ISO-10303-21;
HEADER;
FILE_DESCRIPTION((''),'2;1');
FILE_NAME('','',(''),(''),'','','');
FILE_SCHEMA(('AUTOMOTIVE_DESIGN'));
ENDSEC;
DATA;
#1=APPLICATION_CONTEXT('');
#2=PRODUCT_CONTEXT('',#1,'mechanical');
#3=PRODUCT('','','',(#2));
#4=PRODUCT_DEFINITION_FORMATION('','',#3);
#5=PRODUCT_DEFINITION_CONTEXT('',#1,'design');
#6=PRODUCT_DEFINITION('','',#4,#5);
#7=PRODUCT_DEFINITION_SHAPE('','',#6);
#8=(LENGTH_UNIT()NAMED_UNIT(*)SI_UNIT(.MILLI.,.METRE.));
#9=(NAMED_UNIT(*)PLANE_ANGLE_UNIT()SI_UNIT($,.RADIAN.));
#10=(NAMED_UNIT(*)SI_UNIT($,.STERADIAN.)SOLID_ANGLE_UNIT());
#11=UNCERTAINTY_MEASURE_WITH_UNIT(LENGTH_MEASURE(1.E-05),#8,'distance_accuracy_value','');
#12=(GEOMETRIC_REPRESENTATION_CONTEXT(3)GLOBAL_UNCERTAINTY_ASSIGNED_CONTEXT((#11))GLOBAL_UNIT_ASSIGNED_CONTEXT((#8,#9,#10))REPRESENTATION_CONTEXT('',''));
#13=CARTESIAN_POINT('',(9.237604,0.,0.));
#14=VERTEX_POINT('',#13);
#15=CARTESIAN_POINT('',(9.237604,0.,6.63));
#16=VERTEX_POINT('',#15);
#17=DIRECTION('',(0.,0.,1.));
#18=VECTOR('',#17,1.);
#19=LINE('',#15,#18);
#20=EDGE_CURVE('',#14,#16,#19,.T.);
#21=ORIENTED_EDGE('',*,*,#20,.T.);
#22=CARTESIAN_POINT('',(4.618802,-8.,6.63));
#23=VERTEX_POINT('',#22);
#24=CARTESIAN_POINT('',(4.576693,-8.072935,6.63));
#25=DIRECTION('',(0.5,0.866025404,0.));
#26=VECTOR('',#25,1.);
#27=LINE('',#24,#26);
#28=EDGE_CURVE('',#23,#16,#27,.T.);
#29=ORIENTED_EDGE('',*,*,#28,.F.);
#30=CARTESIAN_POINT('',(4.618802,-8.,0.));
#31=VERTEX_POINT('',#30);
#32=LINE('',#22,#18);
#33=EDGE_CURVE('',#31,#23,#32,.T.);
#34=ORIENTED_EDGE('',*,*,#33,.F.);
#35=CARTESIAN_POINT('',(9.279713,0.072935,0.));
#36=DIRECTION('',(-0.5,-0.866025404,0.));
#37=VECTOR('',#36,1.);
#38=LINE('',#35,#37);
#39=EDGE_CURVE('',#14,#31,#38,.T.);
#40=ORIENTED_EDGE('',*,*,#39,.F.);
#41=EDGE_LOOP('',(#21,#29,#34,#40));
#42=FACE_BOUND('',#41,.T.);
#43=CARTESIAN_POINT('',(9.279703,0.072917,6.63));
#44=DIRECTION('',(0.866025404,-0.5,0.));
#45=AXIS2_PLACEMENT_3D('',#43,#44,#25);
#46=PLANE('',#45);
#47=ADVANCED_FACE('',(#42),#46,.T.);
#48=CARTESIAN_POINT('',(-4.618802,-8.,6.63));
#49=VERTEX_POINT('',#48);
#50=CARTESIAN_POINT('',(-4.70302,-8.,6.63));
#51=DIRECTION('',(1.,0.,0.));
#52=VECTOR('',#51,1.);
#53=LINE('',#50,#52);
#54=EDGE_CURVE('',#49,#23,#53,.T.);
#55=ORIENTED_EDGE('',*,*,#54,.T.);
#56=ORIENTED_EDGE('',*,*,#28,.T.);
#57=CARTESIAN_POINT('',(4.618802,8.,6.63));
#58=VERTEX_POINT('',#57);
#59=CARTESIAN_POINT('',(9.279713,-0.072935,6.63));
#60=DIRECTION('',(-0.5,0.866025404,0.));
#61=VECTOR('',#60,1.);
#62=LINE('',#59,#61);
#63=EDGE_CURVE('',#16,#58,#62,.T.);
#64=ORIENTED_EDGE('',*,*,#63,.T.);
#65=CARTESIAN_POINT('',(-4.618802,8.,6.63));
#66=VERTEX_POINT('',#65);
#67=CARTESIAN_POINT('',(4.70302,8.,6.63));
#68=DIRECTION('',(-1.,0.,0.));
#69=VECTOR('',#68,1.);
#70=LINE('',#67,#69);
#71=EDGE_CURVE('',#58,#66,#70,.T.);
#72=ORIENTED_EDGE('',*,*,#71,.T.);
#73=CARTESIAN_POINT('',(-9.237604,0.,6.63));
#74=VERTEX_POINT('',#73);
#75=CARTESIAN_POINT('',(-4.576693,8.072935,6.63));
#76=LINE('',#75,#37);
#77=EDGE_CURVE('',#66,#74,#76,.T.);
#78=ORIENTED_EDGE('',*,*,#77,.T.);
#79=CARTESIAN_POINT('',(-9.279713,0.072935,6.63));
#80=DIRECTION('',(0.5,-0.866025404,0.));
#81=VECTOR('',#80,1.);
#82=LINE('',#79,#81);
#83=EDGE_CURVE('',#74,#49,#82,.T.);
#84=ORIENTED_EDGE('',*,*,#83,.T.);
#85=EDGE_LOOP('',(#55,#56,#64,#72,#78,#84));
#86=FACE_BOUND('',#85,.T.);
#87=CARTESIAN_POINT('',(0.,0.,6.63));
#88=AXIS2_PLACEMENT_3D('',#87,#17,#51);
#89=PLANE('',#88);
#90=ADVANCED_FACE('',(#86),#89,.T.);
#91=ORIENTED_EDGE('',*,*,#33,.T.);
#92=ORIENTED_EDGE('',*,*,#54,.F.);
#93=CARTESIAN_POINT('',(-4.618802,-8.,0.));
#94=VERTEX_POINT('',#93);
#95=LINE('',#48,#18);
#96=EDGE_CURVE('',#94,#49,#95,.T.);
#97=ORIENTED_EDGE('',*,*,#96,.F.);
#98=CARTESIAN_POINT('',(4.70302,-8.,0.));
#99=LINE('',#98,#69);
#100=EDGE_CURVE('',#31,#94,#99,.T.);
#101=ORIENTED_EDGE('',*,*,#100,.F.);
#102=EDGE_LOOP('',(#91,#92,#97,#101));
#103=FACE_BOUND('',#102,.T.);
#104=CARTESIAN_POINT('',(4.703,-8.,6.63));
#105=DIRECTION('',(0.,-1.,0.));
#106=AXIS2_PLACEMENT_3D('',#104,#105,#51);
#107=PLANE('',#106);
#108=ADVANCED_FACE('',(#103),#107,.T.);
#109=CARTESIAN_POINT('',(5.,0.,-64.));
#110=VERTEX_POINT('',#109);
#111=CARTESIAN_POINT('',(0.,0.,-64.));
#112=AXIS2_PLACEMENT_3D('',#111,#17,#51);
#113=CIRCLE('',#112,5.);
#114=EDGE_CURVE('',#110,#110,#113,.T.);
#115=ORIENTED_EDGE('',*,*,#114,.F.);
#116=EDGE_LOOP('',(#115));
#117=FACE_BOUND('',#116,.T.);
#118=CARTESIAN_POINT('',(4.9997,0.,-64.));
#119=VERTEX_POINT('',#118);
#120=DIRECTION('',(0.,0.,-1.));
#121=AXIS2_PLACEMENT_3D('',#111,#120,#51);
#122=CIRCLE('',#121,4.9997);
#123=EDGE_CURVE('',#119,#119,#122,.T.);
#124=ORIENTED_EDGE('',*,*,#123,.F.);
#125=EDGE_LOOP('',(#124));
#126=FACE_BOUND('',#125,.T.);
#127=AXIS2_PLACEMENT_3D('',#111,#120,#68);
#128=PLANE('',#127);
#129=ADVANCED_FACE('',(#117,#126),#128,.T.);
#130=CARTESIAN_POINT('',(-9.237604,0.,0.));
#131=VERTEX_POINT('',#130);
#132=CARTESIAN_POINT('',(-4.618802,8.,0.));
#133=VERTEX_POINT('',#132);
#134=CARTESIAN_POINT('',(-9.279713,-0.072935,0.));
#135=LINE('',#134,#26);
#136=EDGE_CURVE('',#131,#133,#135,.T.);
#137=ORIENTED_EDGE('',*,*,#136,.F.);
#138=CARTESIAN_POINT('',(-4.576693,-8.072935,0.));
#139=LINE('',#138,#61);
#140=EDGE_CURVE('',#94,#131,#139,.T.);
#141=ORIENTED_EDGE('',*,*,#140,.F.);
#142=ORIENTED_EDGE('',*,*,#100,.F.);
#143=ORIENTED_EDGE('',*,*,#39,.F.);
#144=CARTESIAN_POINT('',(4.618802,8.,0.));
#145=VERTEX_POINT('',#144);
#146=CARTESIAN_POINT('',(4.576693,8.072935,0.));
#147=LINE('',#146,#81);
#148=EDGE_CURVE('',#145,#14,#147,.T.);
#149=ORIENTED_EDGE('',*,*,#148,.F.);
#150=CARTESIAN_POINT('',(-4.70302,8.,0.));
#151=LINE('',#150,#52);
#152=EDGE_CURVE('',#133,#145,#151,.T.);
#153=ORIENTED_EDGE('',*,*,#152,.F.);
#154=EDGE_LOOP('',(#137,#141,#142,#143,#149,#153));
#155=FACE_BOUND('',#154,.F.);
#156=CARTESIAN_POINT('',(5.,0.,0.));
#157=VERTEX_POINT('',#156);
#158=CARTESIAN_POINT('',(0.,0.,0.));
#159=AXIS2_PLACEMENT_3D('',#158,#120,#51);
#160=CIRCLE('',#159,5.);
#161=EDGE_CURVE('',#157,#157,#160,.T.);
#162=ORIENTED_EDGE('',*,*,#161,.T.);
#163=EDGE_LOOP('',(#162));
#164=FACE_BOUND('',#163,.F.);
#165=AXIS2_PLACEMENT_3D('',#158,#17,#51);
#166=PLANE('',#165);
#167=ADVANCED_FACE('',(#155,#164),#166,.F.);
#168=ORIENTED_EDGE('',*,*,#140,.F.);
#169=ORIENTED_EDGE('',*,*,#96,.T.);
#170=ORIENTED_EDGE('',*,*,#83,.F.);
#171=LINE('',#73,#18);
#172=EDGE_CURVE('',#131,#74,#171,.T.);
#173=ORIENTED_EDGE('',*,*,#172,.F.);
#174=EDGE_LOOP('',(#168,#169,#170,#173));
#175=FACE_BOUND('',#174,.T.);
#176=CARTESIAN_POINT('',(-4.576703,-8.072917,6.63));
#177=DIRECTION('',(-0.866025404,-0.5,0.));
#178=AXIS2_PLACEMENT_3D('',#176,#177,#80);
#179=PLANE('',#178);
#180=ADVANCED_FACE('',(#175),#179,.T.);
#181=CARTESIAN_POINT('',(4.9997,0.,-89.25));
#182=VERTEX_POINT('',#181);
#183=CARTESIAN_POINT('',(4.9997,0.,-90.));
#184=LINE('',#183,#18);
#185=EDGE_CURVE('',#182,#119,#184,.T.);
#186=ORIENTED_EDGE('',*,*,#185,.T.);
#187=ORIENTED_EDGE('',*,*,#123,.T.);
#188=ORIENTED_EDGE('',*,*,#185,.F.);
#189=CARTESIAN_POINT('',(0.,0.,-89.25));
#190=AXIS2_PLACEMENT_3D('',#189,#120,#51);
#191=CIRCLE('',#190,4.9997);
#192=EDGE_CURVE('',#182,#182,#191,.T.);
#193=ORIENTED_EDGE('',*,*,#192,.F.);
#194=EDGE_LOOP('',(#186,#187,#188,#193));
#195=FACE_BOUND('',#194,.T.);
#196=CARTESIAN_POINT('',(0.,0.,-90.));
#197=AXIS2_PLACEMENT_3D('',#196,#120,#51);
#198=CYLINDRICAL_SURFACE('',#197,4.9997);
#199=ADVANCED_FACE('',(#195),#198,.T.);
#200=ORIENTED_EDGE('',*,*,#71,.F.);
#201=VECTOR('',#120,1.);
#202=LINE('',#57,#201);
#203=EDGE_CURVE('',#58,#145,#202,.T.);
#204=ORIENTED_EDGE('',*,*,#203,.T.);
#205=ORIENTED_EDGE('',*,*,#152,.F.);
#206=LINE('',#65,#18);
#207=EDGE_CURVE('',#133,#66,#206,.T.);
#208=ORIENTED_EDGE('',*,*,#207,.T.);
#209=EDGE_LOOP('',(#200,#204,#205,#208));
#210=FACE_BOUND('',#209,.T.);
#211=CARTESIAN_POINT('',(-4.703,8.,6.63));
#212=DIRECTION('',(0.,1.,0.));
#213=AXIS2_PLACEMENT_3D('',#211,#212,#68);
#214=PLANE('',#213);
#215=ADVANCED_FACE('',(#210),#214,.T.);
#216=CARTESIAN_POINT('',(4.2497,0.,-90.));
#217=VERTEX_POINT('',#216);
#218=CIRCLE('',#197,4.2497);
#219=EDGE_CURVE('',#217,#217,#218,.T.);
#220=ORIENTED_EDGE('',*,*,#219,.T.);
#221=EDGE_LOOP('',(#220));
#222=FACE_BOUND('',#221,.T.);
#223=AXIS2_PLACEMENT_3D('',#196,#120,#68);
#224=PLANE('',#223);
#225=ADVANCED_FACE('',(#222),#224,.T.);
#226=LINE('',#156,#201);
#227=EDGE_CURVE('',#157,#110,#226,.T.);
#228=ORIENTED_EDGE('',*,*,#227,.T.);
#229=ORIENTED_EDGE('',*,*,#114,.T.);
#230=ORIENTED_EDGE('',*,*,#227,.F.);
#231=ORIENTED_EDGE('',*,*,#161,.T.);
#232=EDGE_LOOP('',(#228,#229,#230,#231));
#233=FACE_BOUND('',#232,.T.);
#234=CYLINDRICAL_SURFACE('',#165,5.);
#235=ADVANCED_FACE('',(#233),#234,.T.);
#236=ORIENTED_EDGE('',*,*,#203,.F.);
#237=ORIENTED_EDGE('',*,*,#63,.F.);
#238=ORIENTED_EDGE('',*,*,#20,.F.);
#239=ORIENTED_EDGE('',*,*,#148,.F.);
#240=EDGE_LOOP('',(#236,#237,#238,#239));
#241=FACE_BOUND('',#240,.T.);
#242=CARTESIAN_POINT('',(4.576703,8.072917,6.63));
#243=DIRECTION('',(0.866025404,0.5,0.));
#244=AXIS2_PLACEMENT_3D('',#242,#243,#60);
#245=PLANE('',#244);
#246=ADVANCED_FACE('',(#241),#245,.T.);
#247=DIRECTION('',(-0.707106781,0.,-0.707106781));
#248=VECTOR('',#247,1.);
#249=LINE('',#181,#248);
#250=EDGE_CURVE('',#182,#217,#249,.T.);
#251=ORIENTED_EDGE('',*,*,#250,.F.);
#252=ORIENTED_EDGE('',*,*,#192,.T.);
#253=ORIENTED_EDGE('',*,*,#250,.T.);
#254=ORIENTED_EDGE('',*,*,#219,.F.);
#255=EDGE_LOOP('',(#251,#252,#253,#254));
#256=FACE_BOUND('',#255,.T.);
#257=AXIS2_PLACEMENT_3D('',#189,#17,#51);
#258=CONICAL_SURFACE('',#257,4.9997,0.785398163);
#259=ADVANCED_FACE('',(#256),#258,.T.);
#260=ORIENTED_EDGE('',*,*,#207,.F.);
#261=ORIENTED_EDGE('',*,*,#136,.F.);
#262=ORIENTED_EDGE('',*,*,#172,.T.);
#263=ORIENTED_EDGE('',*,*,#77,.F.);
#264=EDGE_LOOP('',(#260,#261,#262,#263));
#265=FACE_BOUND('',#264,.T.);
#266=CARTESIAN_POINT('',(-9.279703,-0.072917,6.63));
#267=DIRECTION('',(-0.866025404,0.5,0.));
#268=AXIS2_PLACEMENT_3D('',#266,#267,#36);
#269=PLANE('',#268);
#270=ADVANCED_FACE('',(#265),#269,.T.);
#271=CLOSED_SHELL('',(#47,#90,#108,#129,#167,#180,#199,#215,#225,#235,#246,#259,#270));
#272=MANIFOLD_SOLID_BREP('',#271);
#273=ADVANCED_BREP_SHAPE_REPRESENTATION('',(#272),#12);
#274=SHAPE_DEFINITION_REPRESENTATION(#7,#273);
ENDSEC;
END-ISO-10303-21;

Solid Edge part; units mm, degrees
sketch "Sketch1" plane through (0, 0, 0) normal (0, 0, 1) x (1, 0, 0)
  circle A0 centre (0, 0) radius 9.28
  dimension "D1" = 18.56
extrude "Protrusion1" add sketch "Sketch1" along normal blind 6.63
sketch "Sketch2" plane through (0, 0, 0) normal (0, 0, -1) x (1, 0, 0)
  circle A0 centre (0, 0) radius 5
extrude "Protrusion2" add sketch "Sketch2" along normal blind 90
sketch "Sketch3" plane through (0, 0, -90) normal (0, 0, -1) x (1, 0, 0)
  circle A0 centre (0, 0) radius 4.9997
extrude "Cutout1" cut sketch "Sketch3" against normal blind 26 flip side to cut
chamfer "Chamfer_1" distance 0.75 angle 45 1 edges at (-4.9997, 0, -90)
sketch "Sketch4" plane through (0, 0, 6.63) normal (0, 0, 1) x (1, 0, 0)
  line L0 (-4.703, 8) -> (4.703, 8)
  dimension "D1" = 16
extrude "Cutout2" cut sketch "Sketch4" against normal up to next material side at (0, 8.05, 6.63)
pattern_circular "Pattern1" count 6 over 360 about axis through (0, 0, 6.63) along (0, 0, 1) of "Cutout2"
properties part number "24102253"
